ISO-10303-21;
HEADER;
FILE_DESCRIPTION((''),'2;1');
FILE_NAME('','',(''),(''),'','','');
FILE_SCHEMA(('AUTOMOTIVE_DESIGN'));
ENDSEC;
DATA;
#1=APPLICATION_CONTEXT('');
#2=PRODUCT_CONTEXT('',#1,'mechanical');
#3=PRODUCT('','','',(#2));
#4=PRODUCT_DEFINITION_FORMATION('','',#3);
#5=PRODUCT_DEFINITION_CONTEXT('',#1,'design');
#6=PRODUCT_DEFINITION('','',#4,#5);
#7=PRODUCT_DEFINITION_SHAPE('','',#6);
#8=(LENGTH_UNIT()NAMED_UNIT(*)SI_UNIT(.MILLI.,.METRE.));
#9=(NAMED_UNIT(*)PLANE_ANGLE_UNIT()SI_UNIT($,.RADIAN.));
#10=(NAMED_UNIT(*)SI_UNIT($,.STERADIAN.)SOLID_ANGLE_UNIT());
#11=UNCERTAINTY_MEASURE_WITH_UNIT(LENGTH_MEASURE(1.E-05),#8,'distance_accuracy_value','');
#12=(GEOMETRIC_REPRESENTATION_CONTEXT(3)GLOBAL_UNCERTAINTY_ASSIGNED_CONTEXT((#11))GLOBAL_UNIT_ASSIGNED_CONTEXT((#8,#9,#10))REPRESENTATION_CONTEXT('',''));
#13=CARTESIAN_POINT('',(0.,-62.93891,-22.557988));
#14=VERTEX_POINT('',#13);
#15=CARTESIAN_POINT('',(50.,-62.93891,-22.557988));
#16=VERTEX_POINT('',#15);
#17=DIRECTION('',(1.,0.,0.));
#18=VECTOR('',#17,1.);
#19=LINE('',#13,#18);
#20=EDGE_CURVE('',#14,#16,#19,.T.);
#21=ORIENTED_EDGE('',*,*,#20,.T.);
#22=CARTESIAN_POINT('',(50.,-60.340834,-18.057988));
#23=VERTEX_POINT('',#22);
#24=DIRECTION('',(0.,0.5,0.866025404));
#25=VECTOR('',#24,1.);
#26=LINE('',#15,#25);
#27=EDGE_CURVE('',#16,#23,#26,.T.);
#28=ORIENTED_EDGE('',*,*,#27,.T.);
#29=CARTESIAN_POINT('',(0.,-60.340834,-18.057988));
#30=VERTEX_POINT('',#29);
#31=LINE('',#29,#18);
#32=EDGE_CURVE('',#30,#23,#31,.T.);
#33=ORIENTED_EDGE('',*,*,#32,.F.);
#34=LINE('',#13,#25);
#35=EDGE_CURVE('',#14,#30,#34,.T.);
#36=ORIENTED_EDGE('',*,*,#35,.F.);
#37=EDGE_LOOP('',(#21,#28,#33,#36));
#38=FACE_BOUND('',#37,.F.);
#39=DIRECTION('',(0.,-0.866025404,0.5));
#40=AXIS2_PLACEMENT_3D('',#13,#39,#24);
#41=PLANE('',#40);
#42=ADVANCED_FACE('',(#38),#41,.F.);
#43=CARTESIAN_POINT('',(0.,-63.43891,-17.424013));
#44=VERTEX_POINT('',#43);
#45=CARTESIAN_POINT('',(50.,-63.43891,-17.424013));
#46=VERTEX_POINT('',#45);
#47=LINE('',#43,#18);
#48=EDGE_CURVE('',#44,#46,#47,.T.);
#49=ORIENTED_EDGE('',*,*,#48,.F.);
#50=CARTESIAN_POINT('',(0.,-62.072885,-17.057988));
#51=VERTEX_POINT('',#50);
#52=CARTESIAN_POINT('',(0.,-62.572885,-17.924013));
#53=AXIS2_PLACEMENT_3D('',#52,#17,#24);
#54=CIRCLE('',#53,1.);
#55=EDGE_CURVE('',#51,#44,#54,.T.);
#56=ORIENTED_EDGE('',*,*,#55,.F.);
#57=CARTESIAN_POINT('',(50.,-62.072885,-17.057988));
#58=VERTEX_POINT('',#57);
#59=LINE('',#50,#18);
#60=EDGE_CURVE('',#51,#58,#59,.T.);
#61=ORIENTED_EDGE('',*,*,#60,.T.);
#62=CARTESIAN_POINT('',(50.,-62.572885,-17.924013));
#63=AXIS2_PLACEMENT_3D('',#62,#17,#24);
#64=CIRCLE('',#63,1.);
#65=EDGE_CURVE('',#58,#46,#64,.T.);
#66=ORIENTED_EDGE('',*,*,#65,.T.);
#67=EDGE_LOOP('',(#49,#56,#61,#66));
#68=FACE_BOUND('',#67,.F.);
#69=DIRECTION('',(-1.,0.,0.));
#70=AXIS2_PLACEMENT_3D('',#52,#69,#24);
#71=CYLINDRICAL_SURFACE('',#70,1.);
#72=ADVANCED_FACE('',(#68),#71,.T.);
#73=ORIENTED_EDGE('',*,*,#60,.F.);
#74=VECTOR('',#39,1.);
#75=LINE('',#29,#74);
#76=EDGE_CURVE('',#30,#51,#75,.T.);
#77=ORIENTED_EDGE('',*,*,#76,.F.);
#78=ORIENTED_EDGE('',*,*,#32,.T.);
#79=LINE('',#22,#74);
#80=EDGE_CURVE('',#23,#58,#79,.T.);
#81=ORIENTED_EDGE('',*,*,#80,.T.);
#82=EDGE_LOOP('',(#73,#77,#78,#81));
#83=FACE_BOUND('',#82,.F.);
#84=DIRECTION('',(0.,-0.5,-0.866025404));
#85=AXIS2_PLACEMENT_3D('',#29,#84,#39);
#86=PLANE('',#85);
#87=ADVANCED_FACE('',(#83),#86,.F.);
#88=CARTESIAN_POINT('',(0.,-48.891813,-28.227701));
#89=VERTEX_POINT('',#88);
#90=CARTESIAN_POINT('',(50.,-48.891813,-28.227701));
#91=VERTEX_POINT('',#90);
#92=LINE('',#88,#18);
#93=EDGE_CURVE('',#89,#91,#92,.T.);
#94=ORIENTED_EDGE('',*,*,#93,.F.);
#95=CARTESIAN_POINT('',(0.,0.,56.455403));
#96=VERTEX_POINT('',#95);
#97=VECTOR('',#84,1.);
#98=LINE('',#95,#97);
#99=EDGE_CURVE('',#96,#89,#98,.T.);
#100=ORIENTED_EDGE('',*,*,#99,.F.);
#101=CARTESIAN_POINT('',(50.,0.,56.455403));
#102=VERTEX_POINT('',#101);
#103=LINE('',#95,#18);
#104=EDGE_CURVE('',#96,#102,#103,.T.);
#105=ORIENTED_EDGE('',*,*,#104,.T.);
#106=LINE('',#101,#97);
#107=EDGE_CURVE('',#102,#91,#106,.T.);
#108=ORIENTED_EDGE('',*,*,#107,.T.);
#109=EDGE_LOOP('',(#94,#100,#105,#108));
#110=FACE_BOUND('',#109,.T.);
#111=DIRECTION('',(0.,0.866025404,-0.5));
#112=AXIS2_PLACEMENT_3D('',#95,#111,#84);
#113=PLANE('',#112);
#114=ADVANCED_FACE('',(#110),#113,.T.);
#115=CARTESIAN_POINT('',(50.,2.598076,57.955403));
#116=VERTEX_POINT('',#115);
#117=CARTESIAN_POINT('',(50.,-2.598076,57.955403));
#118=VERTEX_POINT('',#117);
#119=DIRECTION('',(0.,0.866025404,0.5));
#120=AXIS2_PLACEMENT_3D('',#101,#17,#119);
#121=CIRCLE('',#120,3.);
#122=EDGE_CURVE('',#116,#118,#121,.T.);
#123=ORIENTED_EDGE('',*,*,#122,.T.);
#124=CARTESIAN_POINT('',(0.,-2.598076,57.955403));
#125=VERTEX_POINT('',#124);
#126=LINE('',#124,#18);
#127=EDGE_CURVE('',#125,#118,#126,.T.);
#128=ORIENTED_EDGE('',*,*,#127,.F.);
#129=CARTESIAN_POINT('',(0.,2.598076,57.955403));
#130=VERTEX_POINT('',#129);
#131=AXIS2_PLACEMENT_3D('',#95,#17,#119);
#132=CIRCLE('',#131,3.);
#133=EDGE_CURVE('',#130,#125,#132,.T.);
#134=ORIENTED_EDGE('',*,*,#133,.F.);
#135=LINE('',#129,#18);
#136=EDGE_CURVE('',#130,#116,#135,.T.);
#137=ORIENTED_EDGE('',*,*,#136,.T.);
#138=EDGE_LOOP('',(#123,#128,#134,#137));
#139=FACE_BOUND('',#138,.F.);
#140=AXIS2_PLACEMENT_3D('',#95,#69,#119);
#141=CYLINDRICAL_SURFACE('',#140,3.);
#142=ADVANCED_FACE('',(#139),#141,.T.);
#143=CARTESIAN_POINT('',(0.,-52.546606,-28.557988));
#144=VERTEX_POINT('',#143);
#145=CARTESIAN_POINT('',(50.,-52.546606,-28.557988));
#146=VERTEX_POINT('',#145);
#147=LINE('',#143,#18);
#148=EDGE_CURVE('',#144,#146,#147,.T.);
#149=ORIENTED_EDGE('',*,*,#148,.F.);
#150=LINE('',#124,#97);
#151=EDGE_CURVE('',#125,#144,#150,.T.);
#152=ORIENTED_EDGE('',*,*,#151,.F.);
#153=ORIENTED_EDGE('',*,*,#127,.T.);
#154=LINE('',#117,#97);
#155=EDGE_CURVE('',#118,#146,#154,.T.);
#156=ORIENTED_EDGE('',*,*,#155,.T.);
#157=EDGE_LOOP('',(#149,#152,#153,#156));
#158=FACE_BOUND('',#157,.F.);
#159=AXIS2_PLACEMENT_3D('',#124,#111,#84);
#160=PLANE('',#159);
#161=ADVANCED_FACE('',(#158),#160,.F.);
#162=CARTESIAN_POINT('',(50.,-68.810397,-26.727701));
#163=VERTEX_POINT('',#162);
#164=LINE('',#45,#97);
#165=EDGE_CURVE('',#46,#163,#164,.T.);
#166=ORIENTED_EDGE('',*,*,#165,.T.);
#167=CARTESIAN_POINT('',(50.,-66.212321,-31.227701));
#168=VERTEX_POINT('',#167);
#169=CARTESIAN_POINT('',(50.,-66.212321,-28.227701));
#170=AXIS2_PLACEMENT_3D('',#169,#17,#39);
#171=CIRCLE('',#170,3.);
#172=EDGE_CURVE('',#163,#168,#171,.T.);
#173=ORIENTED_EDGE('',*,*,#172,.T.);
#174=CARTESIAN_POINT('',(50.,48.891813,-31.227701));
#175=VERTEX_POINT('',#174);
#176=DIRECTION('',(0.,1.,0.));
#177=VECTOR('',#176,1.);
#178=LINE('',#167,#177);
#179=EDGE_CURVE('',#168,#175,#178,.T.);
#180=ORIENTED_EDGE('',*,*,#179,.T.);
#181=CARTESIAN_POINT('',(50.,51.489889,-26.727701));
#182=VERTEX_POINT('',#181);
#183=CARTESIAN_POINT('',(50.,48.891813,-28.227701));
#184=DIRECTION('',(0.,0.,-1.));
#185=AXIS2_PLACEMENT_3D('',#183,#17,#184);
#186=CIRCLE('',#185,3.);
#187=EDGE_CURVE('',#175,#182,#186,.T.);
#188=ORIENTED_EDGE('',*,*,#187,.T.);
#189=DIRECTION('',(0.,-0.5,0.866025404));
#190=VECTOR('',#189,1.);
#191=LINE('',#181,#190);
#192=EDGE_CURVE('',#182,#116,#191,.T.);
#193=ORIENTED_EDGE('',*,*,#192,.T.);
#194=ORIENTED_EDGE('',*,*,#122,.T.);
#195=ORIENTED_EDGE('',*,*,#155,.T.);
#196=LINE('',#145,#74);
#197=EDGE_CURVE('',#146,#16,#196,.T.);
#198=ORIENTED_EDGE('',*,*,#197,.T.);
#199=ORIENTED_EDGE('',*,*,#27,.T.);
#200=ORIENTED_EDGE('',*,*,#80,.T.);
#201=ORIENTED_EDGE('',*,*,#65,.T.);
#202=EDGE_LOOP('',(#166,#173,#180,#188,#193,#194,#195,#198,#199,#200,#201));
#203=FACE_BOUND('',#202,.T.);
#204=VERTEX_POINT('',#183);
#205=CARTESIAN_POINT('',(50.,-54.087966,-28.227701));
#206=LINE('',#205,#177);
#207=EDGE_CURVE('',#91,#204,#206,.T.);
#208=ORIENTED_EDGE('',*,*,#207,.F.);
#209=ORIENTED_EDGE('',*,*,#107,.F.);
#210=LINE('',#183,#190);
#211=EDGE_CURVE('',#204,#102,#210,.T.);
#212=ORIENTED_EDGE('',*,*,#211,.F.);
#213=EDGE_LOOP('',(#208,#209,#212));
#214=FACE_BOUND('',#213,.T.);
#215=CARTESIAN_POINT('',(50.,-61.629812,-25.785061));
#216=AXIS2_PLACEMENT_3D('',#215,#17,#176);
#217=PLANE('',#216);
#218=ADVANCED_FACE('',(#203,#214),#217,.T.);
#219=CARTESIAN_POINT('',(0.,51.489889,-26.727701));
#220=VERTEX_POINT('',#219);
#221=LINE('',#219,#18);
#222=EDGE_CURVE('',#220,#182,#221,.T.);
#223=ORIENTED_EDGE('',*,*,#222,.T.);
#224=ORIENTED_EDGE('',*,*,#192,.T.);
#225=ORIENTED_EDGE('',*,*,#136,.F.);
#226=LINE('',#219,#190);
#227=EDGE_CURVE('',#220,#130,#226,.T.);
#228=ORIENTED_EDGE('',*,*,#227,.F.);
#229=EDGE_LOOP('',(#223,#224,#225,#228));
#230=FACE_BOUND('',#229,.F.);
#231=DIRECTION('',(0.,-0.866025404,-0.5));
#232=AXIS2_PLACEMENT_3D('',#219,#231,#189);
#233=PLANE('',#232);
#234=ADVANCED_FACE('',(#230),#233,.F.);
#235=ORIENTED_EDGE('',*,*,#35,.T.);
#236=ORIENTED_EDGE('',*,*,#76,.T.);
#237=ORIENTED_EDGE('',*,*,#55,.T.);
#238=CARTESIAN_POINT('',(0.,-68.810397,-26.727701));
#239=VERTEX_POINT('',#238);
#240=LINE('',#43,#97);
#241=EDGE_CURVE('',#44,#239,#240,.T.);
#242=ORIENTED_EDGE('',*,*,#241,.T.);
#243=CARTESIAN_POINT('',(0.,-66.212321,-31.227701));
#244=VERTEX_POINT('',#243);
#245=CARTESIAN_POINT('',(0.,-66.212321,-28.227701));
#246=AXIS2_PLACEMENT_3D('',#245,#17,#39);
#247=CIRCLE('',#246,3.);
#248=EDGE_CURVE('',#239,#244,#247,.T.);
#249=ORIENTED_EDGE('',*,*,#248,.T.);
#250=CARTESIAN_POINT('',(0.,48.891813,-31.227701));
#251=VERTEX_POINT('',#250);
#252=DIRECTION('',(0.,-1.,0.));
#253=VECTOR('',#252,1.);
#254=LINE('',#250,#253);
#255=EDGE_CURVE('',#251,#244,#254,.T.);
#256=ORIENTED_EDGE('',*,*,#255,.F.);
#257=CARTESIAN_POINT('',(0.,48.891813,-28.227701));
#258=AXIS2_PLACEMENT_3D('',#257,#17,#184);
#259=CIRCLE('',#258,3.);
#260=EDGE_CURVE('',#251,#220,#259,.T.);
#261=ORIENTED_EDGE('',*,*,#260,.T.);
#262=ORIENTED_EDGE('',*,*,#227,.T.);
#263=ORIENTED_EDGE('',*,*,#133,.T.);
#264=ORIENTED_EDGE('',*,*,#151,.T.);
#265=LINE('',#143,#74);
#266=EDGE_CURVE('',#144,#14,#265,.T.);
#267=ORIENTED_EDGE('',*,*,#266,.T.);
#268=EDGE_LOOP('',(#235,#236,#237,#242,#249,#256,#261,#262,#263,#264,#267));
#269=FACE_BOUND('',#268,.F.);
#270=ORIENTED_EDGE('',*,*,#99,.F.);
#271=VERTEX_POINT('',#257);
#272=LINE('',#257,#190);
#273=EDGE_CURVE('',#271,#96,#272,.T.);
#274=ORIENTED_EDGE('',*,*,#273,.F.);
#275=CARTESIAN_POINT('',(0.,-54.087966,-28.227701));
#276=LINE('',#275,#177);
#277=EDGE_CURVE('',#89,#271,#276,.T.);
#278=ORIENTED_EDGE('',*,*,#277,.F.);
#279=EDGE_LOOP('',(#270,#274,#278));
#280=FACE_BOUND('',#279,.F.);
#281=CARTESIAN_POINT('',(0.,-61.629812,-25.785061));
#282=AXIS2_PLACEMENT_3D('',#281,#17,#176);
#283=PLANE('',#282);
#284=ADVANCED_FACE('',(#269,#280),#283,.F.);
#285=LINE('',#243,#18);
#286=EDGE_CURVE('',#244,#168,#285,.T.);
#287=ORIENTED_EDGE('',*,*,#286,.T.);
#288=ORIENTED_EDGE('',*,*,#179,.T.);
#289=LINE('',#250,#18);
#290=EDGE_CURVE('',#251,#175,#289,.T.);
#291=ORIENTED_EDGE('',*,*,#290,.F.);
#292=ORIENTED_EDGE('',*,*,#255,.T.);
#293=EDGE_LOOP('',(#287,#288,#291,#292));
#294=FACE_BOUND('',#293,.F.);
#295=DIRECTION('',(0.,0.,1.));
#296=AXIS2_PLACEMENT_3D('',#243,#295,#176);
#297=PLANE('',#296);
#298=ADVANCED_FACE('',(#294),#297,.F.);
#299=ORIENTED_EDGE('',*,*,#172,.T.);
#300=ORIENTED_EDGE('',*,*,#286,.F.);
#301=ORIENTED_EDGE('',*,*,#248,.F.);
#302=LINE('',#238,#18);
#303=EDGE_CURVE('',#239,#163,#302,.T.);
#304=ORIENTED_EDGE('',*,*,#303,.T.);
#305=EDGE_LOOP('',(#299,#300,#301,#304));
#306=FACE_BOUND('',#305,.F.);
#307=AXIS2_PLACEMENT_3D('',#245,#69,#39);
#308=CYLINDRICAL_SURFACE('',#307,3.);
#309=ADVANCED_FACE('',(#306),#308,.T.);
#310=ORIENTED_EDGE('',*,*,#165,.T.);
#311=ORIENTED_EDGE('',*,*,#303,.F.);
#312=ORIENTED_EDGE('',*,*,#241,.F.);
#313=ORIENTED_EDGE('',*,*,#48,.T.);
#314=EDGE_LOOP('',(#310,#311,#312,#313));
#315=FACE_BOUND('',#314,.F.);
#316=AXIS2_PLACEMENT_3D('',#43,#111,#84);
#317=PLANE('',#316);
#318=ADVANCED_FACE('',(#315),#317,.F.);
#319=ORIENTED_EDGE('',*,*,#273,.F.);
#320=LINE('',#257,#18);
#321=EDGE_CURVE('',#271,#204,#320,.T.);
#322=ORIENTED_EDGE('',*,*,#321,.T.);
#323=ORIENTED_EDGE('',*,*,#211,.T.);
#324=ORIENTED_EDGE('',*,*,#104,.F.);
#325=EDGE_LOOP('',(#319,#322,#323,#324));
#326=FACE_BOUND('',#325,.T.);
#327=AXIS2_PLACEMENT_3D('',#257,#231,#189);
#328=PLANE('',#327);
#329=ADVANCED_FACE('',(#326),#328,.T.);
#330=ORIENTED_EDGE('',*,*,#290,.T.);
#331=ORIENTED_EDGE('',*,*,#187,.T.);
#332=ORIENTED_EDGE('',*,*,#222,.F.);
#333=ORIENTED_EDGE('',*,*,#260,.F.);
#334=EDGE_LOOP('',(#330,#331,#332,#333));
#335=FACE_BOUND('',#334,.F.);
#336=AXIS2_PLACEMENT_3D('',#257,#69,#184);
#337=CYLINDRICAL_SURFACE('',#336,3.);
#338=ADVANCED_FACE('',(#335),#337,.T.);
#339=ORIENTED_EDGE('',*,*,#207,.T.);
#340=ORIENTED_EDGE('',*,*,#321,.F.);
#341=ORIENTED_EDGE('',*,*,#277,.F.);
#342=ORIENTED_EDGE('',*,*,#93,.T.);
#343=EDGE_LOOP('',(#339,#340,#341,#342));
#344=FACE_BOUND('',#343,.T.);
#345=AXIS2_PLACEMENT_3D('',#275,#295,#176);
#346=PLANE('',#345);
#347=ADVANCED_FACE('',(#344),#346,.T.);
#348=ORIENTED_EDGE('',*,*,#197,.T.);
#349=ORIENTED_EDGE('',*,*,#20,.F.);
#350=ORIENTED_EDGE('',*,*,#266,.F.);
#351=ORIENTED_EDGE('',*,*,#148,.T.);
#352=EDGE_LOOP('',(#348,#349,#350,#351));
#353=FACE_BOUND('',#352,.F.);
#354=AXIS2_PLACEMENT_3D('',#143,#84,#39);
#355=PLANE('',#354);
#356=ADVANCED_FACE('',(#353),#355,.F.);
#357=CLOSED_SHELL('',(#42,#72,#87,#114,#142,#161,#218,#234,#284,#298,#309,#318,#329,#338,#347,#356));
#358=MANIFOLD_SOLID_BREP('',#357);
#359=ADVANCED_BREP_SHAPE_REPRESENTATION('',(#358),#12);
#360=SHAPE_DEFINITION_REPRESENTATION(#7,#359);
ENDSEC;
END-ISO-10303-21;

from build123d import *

# Parameters (mm, degrees)
F1_DEPTH = 50
F2_T     = 3
F4_DEPTH = 50


# Not quite as in the source:
# - a shell that OpenCascade refuses in one call is made with other operations: the cavity is built on its own and cut out


with BuildPart() as f1:
    # F0 (on Right) → F1 (new body)
    with BuildSketch(Plane.YZ):
        with BuildLine():
            Line((-2.5980762114, 57.9554029985), (-54.0879656003, -31.2277014993))
            Line((-54.0879656003, -31.2277014993), (48.8918131776, -31.2277014993))
            ThreePointArc((48.8918131776, -31.2277014993), (51.4898893889, -29.7277014993), (51.4898893889, -26.7277014993))
            Line((51.4898893889, -26.7277014993), (2.5980762114, 57.9554029985))
            ThreePointArc((2.5980762114, 57.9554029985), (0, 59.4554029985), (-2.5980762114, 57.9554029985))
        make_face()
    extrude(amount=F1_DEPTH)

    # F2: shell of thickness 3, made by hand


with BuildPart() as f2_core1:
    # F2_t2: copy of F1
    add(f1.part)

    # the walls: a layer under each face that stays
    f2_faces = [f2_core1.faces().sort_by_distance(p)[0] for p in [
        (25, -28.3430209058, 13.3638507496),
        (25, -2.5980762114, -31.2277014993),
        (25, 27.0439828001, 15.6138507496),
    ]]
    thicken(f2_faces, amount=-F2_T, mode=Mode.SUBTRACT)


with BuildPart() as f1_1:
    add(f1.part)

    # what is left inside the walls is the cavity
    f2_cavity = [f2_core1.part.solids().sort_by_distance(p)[0] for p in [
        (33.333333, -24.419926, 14.098851),
    ]]
    add(f2_cavity, mode=Mode.SUBTRACT)

    # F3 (on Right) → F4 (join)
    with BuildSketch(Plane.YZ):
        with BuildLine():
            Line((-54.0879656003, -31.2277014993), (-52.5466056017, -28.5579876689))
            Line((-52.5466056017, -28.5579876689), (-62.9389104471, -22.5579876689))
            Line((-62.9389104471, -22.5579876689), (-60.3408342357, -18.0579876689))
            Line((-60.3408342357, -18.0579876689), (-62.0728850433, -17.0579876689))
            ThreePointArc((-62.0728850433, -17.0579876689), (-62.8317040884, -16.9580872464), (-63.4389104471, -17.4240130727))
            Line((-63.4389104471, -17.4240130727), (-68.8103974646, -26.7277014993))
            ThreePointArc((-68.8103974646, -26.7277014993), (-68.8103974646, -29.7277014993), (-66.2123212533, -31.2277014993))
            Line((-66.2123212533, -31.2277014993), (-54.0879656003, -31.2277014993))
        make_face()
    extrude(amount=F4_DEPTH)


solid = f1_1.part
